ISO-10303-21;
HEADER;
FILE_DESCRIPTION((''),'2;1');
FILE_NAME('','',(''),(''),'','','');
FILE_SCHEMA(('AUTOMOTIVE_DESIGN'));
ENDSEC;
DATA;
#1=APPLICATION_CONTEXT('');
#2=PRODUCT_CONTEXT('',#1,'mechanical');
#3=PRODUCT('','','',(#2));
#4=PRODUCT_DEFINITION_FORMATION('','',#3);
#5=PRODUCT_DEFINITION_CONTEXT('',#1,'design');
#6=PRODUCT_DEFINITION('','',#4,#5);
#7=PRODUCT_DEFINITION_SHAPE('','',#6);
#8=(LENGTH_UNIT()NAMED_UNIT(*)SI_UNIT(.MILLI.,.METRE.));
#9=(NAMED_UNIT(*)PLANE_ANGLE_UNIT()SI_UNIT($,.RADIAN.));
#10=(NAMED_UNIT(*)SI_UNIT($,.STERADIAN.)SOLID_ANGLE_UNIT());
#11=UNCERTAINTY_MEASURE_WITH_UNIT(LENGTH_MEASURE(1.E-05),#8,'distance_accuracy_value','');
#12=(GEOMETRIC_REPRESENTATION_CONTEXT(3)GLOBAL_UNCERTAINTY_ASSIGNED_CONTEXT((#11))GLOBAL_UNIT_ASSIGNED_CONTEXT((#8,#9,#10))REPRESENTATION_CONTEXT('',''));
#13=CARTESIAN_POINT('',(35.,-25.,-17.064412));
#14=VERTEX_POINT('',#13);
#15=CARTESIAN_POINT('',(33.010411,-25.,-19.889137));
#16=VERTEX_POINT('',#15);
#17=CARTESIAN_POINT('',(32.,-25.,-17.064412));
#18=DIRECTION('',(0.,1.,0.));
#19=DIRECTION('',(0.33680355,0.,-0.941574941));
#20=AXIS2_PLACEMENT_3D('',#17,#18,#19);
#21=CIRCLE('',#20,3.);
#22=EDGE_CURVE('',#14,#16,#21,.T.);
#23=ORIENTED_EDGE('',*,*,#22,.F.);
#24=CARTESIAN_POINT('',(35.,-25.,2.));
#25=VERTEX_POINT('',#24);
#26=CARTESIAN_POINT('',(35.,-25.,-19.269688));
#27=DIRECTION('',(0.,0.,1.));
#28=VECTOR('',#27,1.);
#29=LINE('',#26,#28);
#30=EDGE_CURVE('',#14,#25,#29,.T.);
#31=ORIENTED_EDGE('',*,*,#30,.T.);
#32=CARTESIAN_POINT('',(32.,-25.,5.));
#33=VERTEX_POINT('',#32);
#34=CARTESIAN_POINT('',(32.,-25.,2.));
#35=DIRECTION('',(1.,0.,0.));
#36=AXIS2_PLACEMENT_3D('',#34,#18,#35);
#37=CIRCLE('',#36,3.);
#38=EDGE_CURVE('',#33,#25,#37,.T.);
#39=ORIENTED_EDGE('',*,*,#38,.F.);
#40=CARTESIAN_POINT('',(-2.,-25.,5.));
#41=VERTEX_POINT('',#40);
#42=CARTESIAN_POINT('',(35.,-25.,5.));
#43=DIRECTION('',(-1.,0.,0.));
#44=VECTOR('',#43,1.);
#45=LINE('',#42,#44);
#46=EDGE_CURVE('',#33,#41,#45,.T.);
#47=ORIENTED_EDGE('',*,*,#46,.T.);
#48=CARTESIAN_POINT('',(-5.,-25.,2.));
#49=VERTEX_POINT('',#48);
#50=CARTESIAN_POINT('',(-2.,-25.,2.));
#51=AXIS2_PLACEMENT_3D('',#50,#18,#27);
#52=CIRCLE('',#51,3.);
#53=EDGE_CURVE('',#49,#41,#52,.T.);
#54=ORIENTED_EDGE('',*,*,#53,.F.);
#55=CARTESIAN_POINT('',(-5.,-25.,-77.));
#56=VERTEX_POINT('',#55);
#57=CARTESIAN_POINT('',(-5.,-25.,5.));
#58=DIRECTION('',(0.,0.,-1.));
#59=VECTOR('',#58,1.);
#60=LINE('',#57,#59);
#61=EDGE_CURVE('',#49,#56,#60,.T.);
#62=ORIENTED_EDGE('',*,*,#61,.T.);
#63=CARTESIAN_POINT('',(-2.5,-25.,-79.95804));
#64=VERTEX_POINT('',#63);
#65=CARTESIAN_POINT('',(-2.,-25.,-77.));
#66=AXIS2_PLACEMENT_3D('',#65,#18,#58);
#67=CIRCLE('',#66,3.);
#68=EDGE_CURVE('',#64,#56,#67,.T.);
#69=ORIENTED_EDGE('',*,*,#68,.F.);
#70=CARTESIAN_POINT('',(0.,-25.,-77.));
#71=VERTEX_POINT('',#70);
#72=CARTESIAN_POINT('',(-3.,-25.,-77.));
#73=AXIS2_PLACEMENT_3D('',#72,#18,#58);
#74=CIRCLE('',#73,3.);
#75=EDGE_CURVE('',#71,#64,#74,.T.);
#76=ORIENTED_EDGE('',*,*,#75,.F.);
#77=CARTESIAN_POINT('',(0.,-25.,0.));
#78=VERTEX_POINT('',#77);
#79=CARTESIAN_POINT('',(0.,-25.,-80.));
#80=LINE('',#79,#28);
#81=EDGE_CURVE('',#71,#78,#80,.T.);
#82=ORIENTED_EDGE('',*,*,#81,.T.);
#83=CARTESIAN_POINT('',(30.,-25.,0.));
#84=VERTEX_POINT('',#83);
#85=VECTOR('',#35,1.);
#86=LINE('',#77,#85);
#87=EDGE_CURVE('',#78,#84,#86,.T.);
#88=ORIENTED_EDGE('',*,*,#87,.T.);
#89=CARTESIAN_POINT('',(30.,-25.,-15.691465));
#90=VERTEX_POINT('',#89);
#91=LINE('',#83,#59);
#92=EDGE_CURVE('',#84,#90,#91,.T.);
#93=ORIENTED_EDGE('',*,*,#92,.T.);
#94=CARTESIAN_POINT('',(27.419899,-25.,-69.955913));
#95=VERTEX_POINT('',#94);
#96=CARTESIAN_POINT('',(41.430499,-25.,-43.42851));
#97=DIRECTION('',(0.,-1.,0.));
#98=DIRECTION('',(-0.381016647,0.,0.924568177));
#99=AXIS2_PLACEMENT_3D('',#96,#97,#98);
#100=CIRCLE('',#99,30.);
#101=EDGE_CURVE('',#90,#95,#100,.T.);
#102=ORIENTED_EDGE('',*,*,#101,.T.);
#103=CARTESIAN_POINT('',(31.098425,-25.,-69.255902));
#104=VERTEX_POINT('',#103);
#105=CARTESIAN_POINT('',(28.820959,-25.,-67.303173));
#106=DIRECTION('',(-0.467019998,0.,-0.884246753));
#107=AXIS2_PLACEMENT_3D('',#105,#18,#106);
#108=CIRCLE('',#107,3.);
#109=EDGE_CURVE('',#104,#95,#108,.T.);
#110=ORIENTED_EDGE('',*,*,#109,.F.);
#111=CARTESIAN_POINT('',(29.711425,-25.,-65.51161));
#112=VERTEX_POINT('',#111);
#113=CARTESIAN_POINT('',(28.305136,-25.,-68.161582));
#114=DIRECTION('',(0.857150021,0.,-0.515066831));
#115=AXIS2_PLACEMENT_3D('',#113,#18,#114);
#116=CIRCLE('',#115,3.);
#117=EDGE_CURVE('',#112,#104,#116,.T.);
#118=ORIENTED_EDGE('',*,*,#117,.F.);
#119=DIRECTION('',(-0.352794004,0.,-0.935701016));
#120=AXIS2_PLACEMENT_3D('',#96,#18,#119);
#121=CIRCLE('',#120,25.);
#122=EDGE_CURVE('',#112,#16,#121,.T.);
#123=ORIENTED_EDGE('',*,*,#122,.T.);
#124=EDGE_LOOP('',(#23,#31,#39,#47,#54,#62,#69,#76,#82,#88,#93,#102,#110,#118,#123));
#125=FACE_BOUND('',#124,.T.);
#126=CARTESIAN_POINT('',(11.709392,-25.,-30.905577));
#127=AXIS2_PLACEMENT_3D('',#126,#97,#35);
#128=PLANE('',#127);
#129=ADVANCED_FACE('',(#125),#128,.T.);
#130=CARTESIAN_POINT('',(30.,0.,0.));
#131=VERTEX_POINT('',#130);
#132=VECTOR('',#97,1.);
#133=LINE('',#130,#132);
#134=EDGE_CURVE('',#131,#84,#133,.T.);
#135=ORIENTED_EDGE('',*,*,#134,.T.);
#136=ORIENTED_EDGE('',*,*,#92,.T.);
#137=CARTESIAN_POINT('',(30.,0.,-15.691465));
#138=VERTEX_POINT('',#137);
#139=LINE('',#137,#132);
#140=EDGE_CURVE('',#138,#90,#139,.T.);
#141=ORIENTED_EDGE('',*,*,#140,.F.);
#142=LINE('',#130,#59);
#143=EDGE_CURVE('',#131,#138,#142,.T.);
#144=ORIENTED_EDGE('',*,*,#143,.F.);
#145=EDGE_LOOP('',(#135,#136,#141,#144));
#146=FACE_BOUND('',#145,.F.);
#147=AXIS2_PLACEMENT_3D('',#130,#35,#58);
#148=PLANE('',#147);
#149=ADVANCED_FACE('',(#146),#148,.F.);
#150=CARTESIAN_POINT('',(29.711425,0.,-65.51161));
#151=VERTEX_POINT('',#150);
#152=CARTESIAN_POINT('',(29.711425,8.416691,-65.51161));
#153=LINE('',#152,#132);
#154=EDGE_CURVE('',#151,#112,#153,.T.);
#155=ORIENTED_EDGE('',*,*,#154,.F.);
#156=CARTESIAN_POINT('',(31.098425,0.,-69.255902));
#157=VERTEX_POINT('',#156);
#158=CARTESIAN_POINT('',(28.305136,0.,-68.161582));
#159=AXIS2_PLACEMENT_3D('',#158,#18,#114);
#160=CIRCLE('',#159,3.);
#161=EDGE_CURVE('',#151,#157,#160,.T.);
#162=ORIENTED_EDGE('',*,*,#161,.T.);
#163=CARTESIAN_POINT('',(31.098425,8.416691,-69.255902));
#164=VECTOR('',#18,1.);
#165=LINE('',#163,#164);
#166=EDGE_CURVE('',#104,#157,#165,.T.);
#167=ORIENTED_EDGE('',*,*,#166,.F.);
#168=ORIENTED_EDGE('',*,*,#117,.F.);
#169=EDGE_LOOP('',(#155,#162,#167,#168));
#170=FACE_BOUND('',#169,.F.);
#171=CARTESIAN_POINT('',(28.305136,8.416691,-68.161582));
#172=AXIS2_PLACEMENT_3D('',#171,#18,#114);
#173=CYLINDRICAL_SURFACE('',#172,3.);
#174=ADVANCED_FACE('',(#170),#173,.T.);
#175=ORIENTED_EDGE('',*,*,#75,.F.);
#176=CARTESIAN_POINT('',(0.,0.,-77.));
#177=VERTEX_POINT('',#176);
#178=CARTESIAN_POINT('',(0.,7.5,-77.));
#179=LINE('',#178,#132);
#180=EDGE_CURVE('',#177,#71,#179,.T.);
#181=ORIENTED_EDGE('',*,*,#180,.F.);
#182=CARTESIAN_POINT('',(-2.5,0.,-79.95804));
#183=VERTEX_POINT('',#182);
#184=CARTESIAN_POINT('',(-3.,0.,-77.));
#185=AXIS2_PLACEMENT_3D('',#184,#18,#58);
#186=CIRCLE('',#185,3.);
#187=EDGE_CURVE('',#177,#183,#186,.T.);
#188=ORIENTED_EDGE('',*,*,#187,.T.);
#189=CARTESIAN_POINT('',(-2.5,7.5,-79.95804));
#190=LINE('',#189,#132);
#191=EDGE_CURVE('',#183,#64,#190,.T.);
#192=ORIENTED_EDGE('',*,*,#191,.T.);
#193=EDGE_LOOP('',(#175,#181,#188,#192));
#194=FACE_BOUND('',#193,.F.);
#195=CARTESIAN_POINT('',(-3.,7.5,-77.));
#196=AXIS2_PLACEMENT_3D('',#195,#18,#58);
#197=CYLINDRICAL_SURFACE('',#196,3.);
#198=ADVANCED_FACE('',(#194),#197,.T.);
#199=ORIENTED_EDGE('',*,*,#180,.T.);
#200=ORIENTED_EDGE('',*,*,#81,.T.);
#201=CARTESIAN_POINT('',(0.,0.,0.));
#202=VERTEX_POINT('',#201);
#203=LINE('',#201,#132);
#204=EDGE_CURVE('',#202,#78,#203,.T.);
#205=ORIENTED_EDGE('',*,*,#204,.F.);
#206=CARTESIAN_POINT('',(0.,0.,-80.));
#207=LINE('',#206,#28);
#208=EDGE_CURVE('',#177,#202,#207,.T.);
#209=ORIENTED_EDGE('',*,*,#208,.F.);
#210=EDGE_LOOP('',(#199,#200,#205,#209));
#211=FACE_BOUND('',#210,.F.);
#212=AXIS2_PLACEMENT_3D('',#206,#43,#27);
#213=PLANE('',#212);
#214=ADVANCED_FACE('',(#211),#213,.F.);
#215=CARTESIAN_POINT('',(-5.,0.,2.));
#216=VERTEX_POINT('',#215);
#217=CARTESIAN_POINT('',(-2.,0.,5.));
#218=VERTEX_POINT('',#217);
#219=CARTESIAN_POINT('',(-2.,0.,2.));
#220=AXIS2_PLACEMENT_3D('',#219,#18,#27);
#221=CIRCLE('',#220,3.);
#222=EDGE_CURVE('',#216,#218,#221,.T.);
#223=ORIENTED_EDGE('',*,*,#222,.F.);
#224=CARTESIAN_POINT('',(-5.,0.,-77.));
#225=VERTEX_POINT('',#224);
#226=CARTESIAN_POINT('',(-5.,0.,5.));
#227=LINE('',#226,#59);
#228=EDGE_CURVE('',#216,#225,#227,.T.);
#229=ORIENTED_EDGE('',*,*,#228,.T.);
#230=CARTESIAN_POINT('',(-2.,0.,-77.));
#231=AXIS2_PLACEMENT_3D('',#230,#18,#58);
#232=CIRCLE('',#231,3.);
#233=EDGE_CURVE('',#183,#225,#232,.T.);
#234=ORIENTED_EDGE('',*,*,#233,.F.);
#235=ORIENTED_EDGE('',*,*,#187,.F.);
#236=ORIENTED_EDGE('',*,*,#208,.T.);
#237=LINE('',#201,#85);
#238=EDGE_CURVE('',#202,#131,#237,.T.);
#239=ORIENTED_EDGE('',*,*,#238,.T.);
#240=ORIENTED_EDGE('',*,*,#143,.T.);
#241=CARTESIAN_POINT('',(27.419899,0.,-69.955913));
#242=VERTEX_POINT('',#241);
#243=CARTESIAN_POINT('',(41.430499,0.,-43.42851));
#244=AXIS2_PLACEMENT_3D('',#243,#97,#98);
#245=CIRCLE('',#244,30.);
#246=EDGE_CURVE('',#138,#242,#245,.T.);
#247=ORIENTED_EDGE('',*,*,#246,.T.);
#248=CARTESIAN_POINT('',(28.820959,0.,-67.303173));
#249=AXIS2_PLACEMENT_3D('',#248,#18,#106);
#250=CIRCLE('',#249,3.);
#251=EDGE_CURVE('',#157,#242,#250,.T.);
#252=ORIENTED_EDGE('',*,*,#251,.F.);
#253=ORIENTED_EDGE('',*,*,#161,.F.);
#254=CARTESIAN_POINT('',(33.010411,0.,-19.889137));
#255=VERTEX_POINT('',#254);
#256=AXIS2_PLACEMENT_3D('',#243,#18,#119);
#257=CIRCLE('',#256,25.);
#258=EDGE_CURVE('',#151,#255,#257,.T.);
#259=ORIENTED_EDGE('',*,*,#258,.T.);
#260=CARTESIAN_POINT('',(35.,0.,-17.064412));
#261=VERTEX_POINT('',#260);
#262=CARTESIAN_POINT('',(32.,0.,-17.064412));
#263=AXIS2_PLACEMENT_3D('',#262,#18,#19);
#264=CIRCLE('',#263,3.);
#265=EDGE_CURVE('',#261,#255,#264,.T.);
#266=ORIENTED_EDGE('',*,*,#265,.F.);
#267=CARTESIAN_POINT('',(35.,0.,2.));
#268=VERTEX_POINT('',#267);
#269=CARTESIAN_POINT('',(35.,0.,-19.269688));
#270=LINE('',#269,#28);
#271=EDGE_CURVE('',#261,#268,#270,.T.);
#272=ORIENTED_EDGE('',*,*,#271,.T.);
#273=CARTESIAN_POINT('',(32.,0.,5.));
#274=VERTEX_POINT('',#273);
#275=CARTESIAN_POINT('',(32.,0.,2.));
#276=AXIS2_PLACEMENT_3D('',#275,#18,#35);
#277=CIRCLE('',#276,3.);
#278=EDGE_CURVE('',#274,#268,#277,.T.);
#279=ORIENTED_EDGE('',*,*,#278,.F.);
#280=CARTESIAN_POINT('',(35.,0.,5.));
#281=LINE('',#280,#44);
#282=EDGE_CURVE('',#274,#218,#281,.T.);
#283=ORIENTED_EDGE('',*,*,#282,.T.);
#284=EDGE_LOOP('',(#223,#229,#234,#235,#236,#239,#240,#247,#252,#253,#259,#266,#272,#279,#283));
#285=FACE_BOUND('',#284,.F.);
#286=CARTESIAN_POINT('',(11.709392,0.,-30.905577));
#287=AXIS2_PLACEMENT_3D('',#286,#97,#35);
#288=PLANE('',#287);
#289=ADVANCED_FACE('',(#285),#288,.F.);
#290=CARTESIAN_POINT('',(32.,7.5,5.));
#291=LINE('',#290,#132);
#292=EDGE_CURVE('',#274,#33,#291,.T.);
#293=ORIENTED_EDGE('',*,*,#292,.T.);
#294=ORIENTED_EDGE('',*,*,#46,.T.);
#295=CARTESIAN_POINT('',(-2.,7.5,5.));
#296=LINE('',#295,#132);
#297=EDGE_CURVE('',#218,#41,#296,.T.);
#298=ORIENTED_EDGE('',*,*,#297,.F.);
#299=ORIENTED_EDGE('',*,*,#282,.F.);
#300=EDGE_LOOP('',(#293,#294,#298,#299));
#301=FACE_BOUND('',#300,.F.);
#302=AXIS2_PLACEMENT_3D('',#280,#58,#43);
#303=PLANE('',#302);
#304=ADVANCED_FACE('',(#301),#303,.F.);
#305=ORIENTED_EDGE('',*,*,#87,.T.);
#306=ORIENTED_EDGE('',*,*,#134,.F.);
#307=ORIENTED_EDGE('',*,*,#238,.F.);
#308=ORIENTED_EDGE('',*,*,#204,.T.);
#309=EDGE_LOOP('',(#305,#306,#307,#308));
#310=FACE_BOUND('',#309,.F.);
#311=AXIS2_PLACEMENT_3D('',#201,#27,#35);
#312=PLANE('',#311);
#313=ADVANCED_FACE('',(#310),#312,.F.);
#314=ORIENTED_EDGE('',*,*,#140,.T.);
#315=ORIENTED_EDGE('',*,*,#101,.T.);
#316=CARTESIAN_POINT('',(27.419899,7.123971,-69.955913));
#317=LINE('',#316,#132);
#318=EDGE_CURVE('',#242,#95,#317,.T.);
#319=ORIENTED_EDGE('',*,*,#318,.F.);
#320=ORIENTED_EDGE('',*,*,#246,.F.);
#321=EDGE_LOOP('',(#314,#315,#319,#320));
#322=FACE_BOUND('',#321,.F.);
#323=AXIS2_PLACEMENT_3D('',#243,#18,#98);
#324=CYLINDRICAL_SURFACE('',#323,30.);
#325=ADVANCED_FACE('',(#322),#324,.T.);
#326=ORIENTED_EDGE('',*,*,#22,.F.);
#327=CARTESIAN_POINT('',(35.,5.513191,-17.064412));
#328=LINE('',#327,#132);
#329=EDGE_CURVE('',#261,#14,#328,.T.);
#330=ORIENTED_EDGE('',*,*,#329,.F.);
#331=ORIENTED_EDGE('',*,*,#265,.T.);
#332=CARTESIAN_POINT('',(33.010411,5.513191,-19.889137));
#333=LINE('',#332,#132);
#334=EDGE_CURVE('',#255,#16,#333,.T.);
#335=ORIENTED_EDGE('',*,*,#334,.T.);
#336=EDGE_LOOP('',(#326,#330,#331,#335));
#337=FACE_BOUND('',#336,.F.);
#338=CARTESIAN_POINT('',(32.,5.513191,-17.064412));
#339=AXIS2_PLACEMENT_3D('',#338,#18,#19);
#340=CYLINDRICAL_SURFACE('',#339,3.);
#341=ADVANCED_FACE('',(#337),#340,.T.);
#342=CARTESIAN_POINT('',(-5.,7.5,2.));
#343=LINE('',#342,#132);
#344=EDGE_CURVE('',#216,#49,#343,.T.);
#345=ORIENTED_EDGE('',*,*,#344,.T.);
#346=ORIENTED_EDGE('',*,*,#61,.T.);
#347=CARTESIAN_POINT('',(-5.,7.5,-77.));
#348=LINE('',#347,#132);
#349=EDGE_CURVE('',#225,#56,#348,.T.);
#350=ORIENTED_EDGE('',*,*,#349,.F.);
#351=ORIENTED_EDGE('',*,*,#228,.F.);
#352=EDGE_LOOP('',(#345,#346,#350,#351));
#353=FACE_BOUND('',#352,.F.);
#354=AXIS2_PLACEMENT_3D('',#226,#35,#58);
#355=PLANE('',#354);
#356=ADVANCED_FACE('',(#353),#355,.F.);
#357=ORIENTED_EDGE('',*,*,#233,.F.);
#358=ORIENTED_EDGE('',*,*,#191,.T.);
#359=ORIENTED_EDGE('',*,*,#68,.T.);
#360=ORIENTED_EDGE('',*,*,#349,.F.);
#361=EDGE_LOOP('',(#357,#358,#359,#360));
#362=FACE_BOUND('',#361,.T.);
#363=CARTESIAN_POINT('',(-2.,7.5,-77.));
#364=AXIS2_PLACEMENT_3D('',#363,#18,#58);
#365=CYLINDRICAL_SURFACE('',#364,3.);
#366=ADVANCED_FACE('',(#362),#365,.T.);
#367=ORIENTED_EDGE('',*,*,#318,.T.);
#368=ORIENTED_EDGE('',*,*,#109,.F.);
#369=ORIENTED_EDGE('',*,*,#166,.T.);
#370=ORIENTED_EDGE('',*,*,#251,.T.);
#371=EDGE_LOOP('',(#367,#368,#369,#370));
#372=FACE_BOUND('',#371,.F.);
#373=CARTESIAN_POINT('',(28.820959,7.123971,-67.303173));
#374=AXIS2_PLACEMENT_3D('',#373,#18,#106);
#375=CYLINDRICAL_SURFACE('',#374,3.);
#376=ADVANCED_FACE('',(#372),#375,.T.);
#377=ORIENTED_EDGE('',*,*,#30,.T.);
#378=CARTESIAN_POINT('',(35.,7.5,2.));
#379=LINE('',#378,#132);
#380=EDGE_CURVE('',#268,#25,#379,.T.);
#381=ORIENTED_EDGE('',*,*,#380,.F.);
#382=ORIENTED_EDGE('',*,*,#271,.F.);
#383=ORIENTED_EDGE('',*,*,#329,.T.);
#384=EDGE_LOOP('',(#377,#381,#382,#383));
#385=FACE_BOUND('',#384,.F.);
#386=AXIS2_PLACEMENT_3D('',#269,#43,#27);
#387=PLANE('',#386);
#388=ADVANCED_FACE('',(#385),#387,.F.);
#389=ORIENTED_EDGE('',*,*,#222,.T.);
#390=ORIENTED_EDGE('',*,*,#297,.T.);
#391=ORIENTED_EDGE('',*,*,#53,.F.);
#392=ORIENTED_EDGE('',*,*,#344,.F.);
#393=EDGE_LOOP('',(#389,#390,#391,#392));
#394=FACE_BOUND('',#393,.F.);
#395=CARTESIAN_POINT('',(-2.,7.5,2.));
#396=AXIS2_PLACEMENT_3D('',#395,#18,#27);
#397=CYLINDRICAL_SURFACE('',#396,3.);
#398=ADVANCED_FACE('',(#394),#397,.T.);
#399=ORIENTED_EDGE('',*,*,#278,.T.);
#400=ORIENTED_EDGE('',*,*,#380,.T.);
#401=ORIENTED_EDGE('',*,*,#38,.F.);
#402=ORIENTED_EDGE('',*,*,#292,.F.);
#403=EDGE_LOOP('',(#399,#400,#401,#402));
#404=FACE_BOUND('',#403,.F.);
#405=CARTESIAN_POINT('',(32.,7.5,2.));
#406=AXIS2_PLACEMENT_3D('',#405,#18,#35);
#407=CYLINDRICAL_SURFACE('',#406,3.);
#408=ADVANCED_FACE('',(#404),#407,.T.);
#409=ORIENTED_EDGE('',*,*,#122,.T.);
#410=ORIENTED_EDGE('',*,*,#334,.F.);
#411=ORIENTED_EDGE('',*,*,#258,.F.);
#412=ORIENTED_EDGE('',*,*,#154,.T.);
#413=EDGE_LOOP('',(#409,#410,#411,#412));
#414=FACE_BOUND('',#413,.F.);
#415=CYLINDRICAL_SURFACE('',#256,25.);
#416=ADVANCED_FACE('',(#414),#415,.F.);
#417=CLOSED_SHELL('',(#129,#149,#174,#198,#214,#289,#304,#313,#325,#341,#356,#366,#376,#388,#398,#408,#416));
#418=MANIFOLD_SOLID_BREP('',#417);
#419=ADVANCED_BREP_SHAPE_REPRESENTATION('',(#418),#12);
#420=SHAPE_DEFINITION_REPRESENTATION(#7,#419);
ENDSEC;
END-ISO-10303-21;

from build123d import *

# Parameters (mm, degrees)
F1_DEPTH    = 25
F2_T1_DEPTH = 40
F2_T3_DEPTH = 36.0263819839
F2_T5_DEPTH = 41.8333819759
F2_T7_DEPTH = 39.2479422715


# Not quite as in the source:
# - a fillet or chamfer that OpenCascade refuses, or shapes differently, is made with other operations: its cross-section is extruded or revolved along the edge and cut away or added


with BuildPart() as f1:
    # F0 (on Front) → F1 (new body)
    with BuildSketch(Plane.XZ):
        with BuildLine():
            Line((-5, -80), (0, -80))
            Line((0, -80), (0, 0))
            Line((0, 0), (30, 0))
            Line((30, 0), (30, -15.6914651025))
            ThreePointArc((30, -15.6914651025), (11.4304994047, -43.4285104275), (30, -71.1655557525))
            Line((30, -71.1655557525), (32.6106493124, -66.8210358224))
            ThreePointArc((32.6106493124, -66.8210358224), (16.4620002863, -42.1738982265), (35, -19.26968849))
            Line((35, -19.26968849), (35, 5))
            Line((35, 5), (-5, 5))
            Line((-5, 5), (-5, -80))
        make_face()
    extrude(amount=F1_DEPTH)

    # F2: fillet of radius 3 on 7 edges, made by hand

    # F2_s2 → F2_t1 (cut)
    with BuildSketch(Plane.XZ.offset(-7.5)):
        with BuildLine():
            ThreePointArc((35, 2), (34.1213203436, 4.1213203436), (32, 5))
            Line((32, 5), (35, 5))
            Line((35, 5), (35, 2))
        make_face()
        with BuildLine():
            ThreePointArc((-3, -80), (-0.8786796564, -79.1213203436), (0, -77))
            Line((0, -77), (0, -80))
            Line((0, -80), (-3, -80))
        make_face()
        with BuildLine():
            ThreePointArc((-2, -80), (-4.1213203436, -79.1213203436), (-5, -77))
            Line((-5, -77), (-5, -80))
            Line((-5, -80), (-2, -80))
        make_face()
        with BuildLine():
            ThreePointArc((-2, 5), (-4.1213203436, 4.1213203436), (-5, 2))
            Line((-5, 2), (-5, 5))
            Line((-5, 5), (-2, 5))
        make_face()
    extrude(amount=F2_T1_DEPTH, mode=Mode.SUBTRACT)

    # F2_s4 → F2_t3 (cut)
    with BuildSketch(Plane.XZ.offset(-5.513190992)):
        with BuildLine():
            ThreePointArc((33.0104106505, -19.8891369147), (34.4526752691, -18.7919490752), (35, -17.0644120932))
            Line((35, -17.0644120932), (35, -19.26968849))
            ThreePointArc((35, -19.26968849), (33.9987485172, -19.5586742582), (33.0104106505, -19.8891369147))
        make_face()
    extrude(amount=F2_T3_DEPTH, mode=Mode.SUBTRACT)

    # F2_s6 → F2_t5 (cut)
    with BuildSketch(Plane.XZ.offset(-8.416690988)):
        with BuildLine():
            ThreePointArc((30.8765859694, -69.7067825667), (31.1957188728, -67.3587557485), (29.7114248515, -65.5116101106))
            ThreePointArc((29.7114248515, -65.5116101106), (31.1401881693, -66.212484942), (32.6106493124, -66.8210358224))
            Line((32.6106493124, -66.8210358224), (30.8765859694, -69.7067825667))
        make_face()
    extrude(amount=F2_T5_DEPTH, mode=Mode.SUBTRACT)

    # F2_s8 → F2_t7 (cut)
    with BuildSketch(Plane.XZ.offset(-7.1239711357)):
        with BuildLine():
            ThreePointArc((27.4198994503, -69.9559130315), (29.6266357528, -70.1929626749), (31.39240951, -68.8483732652))
            Line((31.39240951, -68.8483732652), (30, -71.1655557525))
            ThreePointArc((30, -71.1655557525), (28.695579184, -70.5913859559), (27.4198994503, -69.9559130315))
        make_face()
    extrude(amount=F2_T7_DEPTH, mode=Mode.SUBTRACT)


solid = f1.part
